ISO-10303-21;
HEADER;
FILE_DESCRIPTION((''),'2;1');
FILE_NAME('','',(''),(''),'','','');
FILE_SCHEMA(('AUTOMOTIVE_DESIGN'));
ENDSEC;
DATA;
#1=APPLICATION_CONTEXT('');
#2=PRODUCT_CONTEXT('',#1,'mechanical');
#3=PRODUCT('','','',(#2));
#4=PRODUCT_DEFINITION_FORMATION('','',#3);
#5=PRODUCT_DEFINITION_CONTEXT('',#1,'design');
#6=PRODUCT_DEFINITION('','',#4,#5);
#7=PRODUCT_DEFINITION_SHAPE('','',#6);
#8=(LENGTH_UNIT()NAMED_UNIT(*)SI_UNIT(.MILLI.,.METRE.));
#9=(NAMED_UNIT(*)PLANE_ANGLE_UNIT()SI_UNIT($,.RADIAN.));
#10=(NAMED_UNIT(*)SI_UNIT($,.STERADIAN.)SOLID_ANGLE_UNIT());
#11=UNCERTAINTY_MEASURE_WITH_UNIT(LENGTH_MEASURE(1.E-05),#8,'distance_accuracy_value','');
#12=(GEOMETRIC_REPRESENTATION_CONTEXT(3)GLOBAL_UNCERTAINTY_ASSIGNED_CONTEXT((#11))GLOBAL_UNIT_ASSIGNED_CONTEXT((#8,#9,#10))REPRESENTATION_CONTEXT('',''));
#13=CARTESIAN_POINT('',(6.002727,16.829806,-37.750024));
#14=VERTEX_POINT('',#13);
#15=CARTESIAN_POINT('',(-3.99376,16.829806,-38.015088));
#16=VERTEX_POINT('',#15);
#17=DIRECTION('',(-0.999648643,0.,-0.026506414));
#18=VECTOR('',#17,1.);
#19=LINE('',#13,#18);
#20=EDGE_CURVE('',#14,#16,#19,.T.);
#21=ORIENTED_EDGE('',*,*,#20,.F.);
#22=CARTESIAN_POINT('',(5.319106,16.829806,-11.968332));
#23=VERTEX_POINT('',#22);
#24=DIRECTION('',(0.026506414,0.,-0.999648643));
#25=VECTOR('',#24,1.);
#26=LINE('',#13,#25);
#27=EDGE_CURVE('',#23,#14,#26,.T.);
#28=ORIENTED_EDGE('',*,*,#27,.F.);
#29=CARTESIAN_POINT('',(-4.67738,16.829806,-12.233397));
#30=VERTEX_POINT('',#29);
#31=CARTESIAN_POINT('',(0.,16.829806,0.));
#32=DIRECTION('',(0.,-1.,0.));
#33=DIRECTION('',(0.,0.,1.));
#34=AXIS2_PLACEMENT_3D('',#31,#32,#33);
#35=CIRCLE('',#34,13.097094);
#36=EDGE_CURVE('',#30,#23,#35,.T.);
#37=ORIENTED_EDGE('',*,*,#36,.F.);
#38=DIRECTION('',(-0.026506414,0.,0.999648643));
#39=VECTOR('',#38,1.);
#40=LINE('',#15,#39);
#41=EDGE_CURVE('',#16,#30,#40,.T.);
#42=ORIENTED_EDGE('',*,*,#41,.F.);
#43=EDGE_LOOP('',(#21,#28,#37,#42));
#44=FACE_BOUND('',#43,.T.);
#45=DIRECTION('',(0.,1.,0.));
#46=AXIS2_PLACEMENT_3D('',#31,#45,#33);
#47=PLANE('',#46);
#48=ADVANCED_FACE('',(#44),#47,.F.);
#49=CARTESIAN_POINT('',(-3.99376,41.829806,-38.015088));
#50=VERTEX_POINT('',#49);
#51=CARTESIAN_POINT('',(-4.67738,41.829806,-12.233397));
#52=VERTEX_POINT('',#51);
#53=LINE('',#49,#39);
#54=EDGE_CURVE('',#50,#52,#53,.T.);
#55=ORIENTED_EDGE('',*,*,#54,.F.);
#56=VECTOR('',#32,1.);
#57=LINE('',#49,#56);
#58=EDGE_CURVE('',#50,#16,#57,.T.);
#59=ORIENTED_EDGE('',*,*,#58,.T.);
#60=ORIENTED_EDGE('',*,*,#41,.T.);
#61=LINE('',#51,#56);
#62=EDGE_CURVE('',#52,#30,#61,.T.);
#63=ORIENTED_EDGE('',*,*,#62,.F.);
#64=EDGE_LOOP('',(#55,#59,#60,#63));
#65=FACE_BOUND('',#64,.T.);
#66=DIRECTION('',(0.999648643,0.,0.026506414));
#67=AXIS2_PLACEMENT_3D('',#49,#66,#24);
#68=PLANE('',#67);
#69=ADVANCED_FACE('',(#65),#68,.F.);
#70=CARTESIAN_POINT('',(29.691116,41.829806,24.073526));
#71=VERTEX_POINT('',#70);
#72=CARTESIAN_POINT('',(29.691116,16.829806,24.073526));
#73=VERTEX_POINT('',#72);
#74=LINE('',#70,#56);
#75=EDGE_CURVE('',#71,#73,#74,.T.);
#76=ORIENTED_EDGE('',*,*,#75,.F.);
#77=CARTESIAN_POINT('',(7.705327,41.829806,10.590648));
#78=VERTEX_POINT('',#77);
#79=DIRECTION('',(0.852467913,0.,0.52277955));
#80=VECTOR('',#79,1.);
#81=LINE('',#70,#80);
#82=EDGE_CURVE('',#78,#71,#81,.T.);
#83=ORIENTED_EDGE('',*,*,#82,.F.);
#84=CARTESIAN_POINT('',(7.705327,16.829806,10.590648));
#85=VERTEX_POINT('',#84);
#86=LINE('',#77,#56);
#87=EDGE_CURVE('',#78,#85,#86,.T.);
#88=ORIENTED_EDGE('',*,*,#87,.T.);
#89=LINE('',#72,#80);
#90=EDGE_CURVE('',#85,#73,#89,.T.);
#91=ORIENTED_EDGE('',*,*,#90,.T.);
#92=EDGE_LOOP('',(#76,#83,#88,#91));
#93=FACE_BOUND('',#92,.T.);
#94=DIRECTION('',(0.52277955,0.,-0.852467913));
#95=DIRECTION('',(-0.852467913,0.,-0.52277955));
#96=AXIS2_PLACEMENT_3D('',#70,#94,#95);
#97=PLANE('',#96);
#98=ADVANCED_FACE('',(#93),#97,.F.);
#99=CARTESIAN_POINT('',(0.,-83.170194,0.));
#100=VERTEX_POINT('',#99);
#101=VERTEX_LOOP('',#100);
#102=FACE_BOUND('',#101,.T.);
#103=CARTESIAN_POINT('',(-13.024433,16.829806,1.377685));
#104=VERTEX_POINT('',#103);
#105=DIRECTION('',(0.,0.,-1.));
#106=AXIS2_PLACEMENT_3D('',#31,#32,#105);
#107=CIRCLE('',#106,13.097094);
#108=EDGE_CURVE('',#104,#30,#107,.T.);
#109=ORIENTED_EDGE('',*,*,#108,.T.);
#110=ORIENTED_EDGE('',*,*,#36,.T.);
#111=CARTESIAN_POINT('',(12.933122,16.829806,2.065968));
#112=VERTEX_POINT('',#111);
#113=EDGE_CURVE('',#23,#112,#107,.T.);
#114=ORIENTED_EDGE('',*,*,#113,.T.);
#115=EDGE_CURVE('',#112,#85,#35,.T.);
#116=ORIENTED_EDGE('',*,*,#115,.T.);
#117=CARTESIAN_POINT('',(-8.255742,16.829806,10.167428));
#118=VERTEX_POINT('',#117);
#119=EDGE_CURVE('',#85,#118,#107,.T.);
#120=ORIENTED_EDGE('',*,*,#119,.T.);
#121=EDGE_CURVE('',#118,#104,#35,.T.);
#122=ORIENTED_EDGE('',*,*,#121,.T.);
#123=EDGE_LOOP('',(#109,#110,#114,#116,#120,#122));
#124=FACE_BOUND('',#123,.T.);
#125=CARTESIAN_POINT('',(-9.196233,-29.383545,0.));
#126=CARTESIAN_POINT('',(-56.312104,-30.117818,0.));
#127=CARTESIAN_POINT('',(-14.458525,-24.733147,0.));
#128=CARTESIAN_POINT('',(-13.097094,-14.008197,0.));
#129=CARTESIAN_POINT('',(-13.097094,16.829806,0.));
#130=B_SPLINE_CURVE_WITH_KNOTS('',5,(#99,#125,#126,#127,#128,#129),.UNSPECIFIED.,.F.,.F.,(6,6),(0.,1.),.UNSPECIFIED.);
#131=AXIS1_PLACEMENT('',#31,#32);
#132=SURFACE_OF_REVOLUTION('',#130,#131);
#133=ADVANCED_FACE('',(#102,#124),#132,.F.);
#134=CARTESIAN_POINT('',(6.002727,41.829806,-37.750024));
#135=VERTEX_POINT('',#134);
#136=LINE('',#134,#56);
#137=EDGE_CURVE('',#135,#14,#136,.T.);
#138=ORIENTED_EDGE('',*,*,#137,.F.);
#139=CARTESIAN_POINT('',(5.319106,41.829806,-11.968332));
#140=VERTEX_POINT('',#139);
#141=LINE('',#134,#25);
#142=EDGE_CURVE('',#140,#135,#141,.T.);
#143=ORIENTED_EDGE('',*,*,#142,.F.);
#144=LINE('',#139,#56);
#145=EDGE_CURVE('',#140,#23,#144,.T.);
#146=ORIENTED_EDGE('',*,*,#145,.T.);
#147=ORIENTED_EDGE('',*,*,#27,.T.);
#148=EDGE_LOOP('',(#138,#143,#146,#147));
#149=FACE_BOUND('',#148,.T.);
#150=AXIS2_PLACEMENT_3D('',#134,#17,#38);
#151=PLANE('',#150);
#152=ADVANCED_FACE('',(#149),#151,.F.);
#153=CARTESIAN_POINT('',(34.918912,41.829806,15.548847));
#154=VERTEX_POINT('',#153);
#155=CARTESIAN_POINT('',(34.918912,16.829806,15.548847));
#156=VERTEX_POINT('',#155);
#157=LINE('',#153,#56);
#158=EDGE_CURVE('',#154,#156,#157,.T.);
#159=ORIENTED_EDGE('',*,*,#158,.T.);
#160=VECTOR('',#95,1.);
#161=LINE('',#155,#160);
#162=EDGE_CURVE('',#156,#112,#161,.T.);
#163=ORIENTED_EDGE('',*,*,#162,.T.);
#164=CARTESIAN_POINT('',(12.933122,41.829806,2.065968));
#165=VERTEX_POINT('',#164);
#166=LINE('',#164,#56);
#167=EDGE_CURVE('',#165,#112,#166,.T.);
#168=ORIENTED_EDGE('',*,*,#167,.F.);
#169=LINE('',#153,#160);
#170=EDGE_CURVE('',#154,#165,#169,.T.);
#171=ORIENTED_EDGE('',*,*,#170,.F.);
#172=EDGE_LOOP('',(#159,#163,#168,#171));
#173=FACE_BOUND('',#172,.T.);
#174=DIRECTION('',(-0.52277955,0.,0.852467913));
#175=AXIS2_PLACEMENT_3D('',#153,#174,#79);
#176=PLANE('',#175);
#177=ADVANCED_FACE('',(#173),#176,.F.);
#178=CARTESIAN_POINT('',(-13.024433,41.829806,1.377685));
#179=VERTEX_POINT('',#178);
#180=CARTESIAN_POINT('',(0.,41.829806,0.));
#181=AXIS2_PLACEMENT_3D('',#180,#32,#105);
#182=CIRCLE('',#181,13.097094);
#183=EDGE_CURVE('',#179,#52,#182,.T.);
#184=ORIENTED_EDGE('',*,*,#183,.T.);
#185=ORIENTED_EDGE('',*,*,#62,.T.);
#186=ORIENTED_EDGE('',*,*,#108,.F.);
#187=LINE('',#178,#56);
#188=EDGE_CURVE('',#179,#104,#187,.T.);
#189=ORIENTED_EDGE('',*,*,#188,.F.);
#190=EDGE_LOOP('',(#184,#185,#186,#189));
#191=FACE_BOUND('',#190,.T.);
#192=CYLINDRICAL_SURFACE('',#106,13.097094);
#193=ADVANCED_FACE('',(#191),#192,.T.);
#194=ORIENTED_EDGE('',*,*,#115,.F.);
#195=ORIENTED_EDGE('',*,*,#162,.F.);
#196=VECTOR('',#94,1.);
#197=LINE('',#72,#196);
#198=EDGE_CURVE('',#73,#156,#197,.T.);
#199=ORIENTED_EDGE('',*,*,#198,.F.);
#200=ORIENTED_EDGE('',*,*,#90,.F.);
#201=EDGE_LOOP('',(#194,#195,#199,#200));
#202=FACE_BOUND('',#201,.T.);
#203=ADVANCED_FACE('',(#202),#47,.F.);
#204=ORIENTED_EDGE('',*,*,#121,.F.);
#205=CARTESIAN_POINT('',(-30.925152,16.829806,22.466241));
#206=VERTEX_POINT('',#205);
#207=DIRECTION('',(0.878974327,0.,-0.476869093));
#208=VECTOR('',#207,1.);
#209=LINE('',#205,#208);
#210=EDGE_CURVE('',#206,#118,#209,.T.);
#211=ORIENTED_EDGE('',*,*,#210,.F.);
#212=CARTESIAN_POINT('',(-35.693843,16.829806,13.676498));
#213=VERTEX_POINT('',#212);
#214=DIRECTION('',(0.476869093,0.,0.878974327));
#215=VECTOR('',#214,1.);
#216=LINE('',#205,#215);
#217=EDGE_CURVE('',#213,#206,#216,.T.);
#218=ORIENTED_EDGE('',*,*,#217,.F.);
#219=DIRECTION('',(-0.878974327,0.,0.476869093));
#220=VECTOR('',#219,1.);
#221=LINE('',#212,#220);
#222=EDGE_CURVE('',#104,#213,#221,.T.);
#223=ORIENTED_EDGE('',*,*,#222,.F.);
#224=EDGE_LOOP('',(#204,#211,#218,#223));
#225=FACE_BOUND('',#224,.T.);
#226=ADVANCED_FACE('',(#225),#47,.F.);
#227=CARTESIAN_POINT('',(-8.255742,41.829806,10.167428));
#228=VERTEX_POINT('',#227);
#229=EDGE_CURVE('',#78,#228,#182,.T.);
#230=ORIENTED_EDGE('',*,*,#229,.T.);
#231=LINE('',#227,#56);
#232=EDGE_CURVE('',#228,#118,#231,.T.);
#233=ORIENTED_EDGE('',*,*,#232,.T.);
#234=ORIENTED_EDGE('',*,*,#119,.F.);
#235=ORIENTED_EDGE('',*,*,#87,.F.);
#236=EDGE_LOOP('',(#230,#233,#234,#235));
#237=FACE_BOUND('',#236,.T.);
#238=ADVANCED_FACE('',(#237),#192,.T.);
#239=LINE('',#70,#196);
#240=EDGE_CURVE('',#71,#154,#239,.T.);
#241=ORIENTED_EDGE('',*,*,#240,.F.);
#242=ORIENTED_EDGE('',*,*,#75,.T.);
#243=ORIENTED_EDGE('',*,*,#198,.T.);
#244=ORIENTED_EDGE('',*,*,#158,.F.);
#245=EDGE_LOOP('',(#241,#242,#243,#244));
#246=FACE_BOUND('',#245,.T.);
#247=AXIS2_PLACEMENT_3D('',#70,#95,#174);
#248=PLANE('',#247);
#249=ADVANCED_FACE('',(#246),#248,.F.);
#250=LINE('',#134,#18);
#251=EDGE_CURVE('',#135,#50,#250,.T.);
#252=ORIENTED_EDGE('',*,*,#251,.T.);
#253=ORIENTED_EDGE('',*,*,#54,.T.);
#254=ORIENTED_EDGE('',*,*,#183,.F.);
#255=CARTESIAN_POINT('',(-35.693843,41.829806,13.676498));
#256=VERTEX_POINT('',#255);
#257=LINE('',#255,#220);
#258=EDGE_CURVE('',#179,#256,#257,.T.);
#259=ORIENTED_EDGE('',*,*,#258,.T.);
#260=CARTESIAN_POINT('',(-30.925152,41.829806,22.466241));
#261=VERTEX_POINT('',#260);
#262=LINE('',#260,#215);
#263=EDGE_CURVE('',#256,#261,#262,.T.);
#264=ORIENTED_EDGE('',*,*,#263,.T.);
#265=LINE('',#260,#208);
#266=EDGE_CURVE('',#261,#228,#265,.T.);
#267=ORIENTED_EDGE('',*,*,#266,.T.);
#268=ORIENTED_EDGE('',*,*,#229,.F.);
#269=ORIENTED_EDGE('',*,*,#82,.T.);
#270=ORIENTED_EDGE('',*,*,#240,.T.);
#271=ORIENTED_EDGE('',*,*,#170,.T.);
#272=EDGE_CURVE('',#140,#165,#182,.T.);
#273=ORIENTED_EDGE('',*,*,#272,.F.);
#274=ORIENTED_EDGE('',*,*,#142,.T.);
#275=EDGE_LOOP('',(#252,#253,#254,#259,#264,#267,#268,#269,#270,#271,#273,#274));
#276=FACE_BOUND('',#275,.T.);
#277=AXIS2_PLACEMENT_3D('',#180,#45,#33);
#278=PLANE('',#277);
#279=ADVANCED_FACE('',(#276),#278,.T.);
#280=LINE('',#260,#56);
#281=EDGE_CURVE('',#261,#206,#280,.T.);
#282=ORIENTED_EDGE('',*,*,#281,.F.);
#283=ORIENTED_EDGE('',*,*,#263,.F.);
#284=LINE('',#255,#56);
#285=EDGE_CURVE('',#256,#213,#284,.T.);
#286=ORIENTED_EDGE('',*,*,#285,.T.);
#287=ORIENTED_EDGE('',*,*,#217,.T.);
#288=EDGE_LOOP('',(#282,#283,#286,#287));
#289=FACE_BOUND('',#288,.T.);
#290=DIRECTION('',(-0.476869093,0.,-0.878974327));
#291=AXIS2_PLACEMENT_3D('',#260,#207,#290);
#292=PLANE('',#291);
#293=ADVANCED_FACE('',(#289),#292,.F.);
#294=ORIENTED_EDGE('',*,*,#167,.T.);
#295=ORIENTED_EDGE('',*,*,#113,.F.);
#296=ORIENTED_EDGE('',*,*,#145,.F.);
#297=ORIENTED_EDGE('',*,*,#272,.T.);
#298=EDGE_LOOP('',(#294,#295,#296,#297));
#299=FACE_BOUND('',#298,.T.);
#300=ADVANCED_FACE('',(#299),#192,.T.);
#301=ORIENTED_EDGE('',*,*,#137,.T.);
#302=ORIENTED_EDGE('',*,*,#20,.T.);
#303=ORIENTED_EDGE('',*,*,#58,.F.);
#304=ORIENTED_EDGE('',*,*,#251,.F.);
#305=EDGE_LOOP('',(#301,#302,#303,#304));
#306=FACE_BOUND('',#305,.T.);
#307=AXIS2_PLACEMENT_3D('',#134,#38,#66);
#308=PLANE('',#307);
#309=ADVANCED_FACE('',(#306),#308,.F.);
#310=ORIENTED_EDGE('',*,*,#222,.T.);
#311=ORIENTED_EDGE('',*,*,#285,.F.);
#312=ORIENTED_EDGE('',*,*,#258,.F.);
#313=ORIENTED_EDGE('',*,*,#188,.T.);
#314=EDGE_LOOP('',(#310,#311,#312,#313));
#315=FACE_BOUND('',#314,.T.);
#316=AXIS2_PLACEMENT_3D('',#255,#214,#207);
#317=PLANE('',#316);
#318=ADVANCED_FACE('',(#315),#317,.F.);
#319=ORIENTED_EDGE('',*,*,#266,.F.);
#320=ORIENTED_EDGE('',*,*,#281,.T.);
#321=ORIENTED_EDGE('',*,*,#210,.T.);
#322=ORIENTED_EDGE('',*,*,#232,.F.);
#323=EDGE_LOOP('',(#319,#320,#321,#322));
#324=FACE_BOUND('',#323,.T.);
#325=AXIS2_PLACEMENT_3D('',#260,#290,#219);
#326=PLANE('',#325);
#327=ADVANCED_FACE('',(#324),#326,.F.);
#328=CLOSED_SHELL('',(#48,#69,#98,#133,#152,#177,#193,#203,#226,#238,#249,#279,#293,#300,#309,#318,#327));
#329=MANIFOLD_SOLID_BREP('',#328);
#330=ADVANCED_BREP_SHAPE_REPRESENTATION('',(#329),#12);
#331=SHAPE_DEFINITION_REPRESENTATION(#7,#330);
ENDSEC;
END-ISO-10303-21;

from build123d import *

# Parameters (mm, degrees)
BOSS_EXTRUDE3_START = 25
BOSS_EXTRUDE3_DEPTH = 25


# Read off the part's stored shape, not the designer's step: Revolve1
with BuildPart() as part:
    # Revolve1 outline → Revolve1 (revolve)
    with BuildSketch(Plane.XY):
        with BuildLine():
            add(Edge.make_bspline(
                [(0, -83.170194275), (9.196233186, -29.383544719), (56.312104062, -30.117818032), (14.458525258, -24.733147074), (13.097094087, -14.008197046), (13.097094087, 16.829805725)],
                knots=[0, 0, 0, 0, 0, 0, 1, 1, 1, 1, 1, 1], degree=5))
            Line((13.097094087, 16.829805725), (13.097094087, 41.829805725))
            Line((13.097094087, 41.829805725), (0, 41.829805725))
            Line((0, 41.829805725), (0, -83.170194275))
        make_face()
    revolve(axis=Axis((0, 0, 0), (0, 1, 0)))

    # Sketch5 → Boss-Extrude3 (add)
    with BuildSketch(Plane(origin=(0, 16.829805725, 0), x_dir=(1, 0, 0), z_dir=(0, 1, 0)).offset(BOSS_EXTRUDE3_START)):
        with BuildLine():
            Line((-30.925152295, -22.466241313), (-35.69384323, -13.676498042))
            Line((-35.69384323, -13.676498042), (-13.024433115, -1.377684848))
            ThreePointArc((-13.024433115, -1.377684848), (-11.512009462, -6.245599384), (-8.255742181, -10.167428119))
            Line((-8.255742181, -10.167428119), (-30.925152295, -22.466241313))
        make_face()
        with BuildLine():
            Line((29.691116354, -24.073525975), (34.918911852, -15.548846847))
            Line((34.918911852, -15.548846847), (12.933122133, -2.065968396))
            ThreePointArc((12.933122133, -2.065968396), (11.164852459, -6.846892951), (7.705326635, -10.590647524))
            Line((7.705326635, -10.590647524), (29.691116354, -24.073525975))
        make_face()
        with BuildLine():
            Line((6.002726876, 37.750024016), (5.319106481, 11.968332372))
            ThreePointArc((5.319106481, 11.968332372), (0.347157002, 13.092492335), (-4.677379952, 12.233396515))
            Line((-4.677379952, 12.233396515), (-3.993759557, 38.01508816))
            Line((-3.993759557, 38.01508816), (6.002726876, 37.750024016))
        make_face()
    extrude(amount=-BOSS_EXTRUDE3_DEPTH)


solid = part.part
